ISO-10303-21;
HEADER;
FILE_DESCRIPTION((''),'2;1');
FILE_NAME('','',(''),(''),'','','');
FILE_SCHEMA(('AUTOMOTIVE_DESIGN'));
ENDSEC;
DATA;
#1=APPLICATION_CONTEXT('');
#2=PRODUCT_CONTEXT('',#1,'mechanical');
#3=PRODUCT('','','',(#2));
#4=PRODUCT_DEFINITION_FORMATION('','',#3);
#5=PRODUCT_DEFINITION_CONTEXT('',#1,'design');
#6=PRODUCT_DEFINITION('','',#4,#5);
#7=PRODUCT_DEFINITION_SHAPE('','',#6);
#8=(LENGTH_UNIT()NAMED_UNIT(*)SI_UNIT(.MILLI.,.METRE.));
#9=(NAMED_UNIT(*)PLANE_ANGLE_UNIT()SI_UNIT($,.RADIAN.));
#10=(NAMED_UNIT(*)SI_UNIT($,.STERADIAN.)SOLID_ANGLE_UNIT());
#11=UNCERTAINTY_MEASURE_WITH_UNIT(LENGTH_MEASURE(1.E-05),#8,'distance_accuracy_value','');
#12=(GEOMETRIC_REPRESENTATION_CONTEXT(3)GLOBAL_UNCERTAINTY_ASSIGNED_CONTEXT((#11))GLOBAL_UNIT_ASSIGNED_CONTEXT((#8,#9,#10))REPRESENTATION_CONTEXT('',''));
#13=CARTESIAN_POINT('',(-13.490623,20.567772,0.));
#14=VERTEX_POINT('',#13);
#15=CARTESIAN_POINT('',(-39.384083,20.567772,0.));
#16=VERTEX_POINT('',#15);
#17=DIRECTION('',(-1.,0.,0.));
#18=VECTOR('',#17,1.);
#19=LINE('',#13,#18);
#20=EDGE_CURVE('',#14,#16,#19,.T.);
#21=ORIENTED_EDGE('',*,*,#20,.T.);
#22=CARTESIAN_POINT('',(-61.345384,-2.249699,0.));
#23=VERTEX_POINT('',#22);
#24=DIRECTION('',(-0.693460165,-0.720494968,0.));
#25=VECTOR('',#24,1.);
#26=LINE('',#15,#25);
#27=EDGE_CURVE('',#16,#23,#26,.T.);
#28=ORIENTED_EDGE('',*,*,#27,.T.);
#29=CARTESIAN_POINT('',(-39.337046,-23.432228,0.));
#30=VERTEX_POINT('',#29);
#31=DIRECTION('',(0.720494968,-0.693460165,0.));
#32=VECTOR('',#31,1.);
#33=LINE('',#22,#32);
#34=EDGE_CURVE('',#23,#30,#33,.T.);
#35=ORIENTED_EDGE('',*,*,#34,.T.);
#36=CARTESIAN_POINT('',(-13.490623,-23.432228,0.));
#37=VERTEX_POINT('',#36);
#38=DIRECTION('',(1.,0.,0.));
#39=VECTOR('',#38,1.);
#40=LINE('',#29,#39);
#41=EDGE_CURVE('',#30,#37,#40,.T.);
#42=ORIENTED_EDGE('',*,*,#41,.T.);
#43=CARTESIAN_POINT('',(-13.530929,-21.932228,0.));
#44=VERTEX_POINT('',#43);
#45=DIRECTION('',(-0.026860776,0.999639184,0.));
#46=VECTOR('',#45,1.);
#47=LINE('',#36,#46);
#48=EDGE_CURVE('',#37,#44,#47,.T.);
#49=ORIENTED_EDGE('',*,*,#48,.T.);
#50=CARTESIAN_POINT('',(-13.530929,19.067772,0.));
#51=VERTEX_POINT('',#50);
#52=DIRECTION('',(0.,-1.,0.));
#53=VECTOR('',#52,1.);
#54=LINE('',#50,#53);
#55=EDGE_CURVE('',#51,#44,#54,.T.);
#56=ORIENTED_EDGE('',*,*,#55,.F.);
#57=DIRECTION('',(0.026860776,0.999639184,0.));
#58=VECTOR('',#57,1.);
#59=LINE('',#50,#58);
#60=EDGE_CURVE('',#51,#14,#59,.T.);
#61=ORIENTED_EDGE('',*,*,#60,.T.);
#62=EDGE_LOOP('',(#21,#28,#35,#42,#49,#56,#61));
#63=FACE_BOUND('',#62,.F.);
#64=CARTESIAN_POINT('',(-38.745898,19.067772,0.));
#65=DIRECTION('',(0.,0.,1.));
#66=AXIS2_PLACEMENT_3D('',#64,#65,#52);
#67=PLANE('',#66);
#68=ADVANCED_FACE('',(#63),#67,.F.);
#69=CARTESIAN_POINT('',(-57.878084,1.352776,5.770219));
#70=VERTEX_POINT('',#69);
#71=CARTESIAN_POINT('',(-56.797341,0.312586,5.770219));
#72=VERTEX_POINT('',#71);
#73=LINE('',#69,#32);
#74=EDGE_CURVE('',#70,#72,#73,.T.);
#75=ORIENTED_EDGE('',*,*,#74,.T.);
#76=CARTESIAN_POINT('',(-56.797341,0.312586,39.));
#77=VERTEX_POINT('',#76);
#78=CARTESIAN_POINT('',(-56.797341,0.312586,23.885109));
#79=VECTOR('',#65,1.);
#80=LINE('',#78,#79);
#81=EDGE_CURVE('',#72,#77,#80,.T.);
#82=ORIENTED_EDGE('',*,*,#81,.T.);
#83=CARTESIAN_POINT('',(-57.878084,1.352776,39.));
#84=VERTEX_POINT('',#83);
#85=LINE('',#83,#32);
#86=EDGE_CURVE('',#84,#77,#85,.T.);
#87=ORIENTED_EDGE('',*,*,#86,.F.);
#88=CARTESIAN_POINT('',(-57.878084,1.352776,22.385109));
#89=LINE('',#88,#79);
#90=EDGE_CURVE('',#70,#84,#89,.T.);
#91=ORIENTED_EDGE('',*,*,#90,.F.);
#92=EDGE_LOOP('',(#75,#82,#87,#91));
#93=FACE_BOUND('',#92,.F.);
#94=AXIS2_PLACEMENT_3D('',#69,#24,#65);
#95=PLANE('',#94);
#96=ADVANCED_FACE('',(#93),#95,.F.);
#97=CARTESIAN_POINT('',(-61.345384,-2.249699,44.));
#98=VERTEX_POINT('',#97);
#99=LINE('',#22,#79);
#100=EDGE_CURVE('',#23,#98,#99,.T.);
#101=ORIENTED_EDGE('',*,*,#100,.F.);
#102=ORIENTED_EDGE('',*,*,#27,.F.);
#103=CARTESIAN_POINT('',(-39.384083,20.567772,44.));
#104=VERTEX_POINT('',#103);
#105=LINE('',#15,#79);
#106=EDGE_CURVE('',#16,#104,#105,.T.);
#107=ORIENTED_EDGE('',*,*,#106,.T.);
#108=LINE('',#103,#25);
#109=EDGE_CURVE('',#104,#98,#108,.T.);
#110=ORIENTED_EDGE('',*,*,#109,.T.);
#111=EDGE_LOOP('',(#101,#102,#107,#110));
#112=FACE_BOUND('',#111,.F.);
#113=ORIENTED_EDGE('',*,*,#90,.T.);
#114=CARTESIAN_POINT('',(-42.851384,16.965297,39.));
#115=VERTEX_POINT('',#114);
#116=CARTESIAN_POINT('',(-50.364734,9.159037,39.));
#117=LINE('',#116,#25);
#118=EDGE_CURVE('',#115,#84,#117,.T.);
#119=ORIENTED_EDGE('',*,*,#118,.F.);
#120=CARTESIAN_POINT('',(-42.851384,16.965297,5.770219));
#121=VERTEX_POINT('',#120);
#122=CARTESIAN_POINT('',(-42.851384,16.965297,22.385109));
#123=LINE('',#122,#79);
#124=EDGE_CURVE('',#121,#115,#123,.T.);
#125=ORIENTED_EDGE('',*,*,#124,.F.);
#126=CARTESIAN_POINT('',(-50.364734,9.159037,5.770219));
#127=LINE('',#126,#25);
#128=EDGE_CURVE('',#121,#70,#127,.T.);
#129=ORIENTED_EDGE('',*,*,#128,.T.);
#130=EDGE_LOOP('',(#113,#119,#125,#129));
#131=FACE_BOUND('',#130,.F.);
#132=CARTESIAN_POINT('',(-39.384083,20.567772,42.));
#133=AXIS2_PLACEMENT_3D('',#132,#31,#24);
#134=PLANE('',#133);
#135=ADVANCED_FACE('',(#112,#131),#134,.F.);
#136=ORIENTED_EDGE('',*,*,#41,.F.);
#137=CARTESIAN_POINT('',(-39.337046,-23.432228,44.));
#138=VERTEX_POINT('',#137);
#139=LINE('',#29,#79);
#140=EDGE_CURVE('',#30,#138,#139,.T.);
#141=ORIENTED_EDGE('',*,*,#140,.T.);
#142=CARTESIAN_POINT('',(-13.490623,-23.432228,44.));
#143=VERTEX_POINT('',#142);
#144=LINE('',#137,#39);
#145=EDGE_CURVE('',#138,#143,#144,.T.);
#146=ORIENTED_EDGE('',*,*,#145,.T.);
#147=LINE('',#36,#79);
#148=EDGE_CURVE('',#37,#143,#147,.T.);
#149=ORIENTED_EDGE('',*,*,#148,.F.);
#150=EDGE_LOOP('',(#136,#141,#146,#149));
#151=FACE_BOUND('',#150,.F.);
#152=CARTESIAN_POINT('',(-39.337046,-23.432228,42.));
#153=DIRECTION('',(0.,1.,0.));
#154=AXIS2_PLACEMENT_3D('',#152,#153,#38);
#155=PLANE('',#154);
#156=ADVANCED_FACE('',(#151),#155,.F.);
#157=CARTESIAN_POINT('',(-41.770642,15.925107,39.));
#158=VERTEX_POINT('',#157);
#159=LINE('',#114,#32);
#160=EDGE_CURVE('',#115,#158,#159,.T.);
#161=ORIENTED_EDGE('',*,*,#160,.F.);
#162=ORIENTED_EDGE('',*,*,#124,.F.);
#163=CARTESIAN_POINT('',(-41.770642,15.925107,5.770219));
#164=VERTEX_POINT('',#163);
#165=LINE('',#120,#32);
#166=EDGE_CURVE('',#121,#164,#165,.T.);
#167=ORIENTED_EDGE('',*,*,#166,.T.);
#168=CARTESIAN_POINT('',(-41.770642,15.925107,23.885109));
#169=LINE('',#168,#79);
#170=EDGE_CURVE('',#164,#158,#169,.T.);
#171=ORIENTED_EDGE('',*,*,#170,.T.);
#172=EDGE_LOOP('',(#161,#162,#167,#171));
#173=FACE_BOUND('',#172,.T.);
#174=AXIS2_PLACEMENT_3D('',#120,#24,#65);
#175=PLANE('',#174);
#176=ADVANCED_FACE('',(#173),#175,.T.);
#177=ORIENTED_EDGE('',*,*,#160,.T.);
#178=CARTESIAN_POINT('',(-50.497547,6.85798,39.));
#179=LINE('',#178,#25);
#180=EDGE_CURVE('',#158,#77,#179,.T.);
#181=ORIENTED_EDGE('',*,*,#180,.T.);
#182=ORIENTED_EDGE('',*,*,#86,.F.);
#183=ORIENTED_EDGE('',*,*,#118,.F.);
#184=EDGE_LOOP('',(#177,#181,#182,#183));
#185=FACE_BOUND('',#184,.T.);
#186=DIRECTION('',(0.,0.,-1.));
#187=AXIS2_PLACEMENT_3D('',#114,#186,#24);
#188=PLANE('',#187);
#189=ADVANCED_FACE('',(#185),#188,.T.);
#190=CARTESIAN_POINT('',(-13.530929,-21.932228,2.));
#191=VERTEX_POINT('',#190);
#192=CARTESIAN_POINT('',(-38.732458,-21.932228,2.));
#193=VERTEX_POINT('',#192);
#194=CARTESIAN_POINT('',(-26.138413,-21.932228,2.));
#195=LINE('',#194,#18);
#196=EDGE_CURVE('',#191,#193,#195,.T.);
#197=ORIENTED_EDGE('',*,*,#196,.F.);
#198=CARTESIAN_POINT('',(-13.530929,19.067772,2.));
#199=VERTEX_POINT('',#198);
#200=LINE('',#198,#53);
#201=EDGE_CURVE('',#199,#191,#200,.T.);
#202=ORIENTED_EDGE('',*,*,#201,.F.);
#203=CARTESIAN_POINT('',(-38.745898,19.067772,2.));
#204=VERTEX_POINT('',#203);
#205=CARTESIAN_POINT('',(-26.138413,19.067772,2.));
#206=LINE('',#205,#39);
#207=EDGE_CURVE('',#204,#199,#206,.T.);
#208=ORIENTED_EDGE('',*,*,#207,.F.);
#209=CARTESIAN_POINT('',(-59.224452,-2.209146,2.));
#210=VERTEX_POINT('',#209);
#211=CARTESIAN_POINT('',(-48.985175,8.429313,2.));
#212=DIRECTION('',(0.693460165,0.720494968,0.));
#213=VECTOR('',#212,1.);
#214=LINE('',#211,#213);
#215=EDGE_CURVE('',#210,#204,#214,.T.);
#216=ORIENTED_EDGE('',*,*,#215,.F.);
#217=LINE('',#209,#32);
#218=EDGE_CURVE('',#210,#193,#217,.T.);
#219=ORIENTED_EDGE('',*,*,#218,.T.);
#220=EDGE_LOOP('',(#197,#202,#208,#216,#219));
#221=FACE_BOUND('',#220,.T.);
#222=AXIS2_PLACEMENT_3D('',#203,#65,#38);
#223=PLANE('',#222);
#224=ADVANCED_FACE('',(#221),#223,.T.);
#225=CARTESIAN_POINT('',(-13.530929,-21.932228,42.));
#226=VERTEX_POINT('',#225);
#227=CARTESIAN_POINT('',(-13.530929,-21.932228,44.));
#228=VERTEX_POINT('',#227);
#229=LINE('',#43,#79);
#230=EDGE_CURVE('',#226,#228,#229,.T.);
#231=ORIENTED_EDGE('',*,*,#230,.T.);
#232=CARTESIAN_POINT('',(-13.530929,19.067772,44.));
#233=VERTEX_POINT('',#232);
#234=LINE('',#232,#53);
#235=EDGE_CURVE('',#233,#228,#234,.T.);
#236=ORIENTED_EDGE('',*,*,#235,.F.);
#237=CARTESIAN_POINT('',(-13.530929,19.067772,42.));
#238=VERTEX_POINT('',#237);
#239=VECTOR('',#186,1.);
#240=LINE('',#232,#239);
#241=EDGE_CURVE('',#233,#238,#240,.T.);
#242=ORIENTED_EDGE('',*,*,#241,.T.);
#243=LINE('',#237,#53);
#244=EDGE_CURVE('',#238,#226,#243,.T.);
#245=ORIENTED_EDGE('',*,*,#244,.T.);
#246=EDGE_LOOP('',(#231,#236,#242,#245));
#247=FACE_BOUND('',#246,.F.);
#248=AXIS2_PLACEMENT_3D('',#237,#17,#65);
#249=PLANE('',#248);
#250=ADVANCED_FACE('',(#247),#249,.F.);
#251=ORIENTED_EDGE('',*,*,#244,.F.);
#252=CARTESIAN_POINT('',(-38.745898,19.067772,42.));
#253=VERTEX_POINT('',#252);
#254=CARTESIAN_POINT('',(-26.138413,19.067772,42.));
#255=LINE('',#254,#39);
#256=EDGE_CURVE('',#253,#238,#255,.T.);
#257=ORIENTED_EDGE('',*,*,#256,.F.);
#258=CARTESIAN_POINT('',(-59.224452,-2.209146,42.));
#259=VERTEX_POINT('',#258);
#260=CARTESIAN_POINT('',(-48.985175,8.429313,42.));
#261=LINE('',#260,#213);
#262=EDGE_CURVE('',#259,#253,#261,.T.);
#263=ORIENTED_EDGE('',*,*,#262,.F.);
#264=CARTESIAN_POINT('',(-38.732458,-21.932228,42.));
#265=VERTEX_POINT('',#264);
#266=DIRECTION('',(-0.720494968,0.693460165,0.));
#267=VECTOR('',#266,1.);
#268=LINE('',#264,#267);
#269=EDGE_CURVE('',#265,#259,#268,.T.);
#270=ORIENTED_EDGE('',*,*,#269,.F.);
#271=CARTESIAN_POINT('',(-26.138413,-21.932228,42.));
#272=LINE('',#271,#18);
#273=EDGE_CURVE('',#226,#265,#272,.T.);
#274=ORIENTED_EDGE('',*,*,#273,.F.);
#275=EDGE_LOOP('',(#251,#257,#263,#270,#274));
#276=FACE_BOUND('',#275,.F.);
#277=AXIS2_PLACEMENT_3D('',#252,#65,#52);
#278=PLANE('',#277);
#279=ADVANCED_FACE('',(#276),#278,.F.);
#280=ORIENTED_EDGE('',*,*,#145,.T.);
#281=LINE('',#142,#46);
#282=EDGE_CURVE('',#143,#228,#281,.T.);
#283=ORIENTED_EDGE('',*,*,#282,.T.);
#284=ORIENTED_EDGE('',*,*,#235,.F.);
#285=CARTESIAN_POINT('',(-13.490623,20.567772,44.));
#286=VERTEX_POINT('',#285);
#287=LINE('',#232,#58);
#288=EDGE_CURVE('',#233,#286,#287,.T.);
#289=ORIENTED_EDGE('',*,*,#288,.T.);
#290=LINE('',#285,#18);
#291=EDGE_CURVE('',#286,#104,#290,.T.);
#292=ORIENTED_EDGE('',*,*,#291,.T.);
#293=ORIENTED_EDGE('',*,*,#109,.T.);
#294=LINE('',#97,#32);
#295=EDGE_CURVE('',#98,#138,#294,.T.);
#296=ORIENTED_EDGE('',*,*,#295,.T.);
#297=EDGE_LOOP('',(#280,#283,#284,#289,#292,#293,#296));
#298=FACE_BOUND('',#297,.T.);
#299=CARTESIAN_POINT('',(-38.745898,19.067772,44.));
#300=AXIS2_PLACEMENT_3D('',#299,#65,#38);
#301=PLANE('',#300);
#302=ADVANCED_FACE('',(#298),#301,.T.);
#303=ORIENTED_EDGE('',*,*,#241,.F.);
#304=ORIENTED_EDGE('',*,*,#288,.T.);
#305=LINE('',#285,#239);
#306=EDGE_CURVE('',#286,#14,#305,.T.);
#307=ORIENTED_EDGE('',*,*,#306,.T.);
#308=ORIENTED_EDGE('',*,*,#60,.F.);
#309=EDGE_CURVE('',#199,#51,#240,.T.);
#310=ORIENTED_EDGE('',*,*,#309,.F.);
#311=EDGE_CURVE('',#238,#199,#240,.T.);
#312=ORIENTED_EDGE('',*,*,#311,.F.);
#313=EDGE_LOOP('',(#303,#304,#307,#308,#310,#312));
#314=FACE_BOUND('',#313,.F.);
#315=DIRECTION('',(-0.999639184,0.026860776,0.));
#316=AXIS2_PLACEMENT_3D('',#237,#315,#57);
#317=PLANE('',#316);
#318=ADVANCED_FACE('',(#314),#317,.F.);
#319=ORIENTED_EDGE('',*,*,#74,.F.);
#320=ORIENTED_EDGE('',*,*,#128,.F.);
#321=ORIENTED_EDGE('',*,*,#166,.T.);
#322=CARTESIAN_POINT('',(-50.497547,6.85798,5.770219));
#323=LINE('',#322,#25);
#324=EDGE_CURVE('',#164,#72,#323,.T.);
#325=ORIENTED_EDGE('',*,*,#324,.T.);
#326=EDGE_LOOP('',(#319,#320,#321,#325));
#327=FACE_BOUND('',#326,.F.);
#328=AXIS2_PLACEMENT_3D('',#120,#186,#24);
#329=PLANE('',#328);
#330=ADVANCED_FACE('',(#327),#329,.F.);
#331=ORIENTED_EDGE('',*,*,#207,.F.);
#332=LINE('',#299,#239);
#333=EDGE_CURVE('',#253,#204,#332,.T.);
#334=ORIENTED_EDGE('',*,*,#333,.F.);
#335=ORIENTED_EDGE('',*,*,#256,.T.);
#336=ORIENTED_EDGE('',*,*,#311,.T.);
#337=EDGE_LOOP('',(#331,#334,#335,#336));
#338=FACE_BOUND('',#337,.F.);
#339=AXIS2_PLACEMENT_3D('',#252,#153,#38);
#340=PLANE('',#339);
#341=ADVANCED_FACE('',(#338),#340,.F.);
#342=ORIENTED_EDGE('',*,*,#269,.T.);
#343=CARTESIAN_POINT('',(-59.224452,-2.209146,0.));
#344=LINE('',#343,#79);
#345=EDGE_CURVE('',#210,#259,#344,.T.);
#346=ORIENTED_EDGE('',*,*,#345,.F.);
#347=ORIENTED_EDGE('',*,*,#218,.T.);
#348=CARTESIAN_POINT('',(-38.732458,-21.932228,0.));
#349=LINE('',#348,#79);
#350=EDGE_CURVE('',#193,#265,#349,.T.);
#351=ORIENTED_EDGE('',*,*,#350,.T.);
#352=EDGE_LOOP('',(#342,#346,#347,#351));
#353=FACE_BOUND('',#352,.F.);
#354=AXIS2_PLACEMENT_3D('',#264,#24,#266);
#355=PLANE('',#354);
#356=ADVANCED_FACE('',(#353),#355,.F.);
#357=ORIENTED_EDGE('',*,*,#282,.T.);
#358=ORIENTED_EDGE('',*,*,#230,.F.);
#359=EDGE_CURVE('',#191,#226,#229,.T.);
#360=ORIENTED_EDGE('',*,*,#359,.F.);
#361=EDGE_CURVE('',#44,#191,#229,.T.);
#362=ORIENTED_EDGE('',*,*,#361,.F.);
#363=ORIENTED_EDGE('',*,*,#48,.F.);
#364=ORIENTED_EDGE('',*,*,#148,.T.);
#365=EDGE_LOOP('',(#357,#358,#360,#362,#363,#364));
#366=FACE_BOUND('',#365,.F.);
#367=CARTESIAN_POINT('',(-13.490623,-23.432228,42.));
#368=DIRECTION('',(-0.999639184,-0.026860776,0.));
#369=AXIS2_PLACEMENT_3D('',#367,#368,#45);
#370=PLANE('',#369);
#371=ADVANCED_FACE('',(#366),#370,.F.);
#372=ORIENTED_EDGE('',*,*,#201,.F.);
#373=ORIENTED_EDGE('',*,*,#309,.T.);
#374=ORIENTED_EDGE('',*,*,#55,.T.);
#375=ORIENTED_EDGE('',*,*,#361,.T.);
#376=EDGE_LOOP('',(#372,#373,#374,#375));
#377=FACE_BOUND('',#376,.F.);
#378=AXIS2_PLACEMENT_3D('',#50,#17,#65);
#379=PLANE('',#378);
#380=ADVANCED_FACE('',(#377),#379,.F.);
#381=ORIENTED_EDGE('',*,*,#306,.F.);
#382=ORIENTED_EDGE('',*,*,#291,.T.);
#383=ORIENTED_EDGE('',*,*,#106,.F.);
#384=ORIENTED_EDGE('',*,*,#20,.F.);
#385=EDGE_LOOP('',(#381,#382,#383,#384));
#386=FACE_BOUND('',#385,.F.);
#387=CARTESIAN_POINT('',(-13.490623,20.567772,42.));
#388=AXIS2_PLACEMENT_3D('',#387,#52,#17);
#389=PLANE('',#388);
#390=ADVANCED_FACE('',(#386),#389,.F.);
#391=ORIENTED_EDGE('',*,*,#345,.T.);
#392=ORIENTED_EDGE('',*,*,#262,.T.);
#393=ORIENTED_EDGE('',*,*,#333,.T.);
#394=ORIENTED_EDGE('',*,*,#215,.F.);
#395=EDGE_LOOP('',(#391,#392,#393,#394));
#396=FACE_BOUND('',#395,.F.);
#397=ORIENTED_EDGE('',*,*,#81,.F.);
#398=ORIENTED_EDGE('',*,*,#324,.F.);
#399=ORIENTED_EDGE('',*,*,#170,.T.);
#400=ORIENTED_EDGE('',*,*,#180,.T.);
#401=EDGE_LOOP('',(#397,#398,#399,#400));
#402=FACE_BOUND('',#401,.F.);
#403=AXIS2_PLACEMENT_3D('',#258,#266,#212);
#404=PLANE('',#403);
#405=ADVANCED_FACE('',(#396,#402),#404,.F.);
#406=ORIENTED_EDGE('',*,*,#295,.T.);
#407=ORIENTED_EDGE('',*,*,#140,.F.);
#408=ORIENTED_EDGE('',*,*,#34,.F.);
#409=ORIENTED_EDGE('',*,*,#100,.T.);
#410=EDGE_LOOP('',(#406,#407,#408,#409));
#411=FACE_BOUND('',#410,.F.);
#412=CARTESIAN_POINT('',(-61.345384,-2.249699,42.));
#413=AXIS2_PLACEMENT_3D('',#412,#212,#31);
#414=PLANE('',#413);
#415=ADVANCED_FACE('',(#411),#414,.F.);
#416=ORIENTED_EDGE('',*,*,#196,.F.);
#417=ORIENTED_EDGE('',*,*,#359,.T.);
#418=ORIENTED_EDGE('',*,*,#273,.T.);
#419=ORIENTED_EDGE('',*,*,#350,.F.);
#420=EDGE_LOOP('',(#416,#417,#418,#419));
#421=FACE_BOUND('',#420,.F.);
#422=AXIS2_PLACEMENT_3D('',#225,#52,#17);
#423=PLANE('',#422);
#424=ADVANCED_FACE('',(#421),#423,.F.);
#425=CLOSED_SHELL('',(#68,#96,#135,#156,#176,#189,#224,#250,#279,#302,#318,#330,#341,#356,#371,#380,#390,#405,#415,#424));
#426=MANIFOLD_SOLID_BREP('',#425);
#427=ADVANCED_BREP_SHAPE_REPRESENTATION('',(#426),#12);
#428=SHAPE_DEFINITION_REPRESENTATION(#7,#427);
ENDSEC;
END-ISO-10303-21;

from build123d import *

# Parameters (mm, degrees)
F1_DEPTH  = 40
F2_DEPTH  = 2
F3_DEPTH  = 2
F4_W      = 25.2149685806
F4_H      = 2
F5_DEPTH  = 42.1
F5_FACE_W = 40.9870653462
F5_FACE_H = 2
F7_W      = 25.2149685806
F7_H      = 2
F8_DEPTH  = 42
F8_FACE_W = 40.9870653462
F8_FACE_H = 2
F10_W     = 21.6691600519
F10_H     = 33.2297814414
F11_DEPTH = 5.3


with BuildPart() as f1:
    # F0 (on Top) → F1 (new body)
    with BuildSketch(Plane.XY):
        Polygon((-13.4906232357, 20.567771814), (-24.4906232357, 20.567771814), (-39.384083382, 20.567771814), (-61.3453843386, -2.2496986568), (-39.33704599, -23.432228186), (-13.4906232357, -23.432228186), (-13.530928939, -21.9322283479), (-38.732458267, -21.9322283479), (-59.2244518674, -2.2091464562), (-38.7458975196, 19.0677719759), (-24.530928939, 19.0677719759), (-13.530928939, 19.0677719759), align=None)
    extrude(amount=F1_DEPTH)

    # F2 (add): a face of the model
    f2_faces = [f1.faces().sort_by_distance(p)[0] for p in [
        (-49.4292616832, -12.5390688822, 40),
    ]]
    extrude(f2_faces, amount=F2_DEPTH)

    # F3 (add): a face of the model
    f3_faces = [f1.faces().sort_by_distance(p)[0] for p in [
        (-49.4292616832, -12.5390688822, 42),
    ]]
    extrude(f3_faces, amount=F3_DEPTH)

    # F4 (on face) → F5 (join)
    with BuildSketch(Plane.XZ.offset(-19.0677719759)):
        with Locations((-26.1384132293, 43)):
            Rectangle(F4_W, F4_H)
    extrude(amount=F5_DEPTH)

    # F5_face (on face) → F6 (join, up to the next surface of F1)
    with BuildSketch(Plane(origin=(-38.7458975196, -1.4257606972, 43), x_dir=(0, -1, 0), z_dir=(-1, 0, 0))):
        Rectangle(F5_FACE_W, F5_FACE_H)
    extrude(until=Until.NEXT)

    # F7 (on face) → F8 (join)
    with BuildSketch(Plane.XZ.offset(-19.0677719759)):
        with Locations((-26.1384132293, 1)):
            Rectangle(F7_W, F7_H)
    extrude(amount=F8_DEPTH)

    # F8_face (on face) → F9 (join, up to the next surface of F1)
    with BuildSketch(Plane(origin=(-38.7458975196, -1.4257606972, 1), x_dir=(0, -1, 0), z_dir=(-1, 0, 0))):
        Rectangle(F8_FACE_W, F8_FACE_H)
    extrude(until=Until.NEXT)

    # F10 (on face) → F11 (cut)
    with BuildSketch(Plane(origin=(-30.7211592709, 29.5684232548, 0), x_dir=(-0.6934601651, -0.7204949684, 0), z_dir=(-0.7204949684, 0.6934601651, 0))):
        with Locations((28.3268968852, 22.3851092793)):
            Rectangle(F10_W, F10_H)
    extrude(amount=-F11_DEPTH, mode=Mode.SUBTRACT)


solid = f1.part
